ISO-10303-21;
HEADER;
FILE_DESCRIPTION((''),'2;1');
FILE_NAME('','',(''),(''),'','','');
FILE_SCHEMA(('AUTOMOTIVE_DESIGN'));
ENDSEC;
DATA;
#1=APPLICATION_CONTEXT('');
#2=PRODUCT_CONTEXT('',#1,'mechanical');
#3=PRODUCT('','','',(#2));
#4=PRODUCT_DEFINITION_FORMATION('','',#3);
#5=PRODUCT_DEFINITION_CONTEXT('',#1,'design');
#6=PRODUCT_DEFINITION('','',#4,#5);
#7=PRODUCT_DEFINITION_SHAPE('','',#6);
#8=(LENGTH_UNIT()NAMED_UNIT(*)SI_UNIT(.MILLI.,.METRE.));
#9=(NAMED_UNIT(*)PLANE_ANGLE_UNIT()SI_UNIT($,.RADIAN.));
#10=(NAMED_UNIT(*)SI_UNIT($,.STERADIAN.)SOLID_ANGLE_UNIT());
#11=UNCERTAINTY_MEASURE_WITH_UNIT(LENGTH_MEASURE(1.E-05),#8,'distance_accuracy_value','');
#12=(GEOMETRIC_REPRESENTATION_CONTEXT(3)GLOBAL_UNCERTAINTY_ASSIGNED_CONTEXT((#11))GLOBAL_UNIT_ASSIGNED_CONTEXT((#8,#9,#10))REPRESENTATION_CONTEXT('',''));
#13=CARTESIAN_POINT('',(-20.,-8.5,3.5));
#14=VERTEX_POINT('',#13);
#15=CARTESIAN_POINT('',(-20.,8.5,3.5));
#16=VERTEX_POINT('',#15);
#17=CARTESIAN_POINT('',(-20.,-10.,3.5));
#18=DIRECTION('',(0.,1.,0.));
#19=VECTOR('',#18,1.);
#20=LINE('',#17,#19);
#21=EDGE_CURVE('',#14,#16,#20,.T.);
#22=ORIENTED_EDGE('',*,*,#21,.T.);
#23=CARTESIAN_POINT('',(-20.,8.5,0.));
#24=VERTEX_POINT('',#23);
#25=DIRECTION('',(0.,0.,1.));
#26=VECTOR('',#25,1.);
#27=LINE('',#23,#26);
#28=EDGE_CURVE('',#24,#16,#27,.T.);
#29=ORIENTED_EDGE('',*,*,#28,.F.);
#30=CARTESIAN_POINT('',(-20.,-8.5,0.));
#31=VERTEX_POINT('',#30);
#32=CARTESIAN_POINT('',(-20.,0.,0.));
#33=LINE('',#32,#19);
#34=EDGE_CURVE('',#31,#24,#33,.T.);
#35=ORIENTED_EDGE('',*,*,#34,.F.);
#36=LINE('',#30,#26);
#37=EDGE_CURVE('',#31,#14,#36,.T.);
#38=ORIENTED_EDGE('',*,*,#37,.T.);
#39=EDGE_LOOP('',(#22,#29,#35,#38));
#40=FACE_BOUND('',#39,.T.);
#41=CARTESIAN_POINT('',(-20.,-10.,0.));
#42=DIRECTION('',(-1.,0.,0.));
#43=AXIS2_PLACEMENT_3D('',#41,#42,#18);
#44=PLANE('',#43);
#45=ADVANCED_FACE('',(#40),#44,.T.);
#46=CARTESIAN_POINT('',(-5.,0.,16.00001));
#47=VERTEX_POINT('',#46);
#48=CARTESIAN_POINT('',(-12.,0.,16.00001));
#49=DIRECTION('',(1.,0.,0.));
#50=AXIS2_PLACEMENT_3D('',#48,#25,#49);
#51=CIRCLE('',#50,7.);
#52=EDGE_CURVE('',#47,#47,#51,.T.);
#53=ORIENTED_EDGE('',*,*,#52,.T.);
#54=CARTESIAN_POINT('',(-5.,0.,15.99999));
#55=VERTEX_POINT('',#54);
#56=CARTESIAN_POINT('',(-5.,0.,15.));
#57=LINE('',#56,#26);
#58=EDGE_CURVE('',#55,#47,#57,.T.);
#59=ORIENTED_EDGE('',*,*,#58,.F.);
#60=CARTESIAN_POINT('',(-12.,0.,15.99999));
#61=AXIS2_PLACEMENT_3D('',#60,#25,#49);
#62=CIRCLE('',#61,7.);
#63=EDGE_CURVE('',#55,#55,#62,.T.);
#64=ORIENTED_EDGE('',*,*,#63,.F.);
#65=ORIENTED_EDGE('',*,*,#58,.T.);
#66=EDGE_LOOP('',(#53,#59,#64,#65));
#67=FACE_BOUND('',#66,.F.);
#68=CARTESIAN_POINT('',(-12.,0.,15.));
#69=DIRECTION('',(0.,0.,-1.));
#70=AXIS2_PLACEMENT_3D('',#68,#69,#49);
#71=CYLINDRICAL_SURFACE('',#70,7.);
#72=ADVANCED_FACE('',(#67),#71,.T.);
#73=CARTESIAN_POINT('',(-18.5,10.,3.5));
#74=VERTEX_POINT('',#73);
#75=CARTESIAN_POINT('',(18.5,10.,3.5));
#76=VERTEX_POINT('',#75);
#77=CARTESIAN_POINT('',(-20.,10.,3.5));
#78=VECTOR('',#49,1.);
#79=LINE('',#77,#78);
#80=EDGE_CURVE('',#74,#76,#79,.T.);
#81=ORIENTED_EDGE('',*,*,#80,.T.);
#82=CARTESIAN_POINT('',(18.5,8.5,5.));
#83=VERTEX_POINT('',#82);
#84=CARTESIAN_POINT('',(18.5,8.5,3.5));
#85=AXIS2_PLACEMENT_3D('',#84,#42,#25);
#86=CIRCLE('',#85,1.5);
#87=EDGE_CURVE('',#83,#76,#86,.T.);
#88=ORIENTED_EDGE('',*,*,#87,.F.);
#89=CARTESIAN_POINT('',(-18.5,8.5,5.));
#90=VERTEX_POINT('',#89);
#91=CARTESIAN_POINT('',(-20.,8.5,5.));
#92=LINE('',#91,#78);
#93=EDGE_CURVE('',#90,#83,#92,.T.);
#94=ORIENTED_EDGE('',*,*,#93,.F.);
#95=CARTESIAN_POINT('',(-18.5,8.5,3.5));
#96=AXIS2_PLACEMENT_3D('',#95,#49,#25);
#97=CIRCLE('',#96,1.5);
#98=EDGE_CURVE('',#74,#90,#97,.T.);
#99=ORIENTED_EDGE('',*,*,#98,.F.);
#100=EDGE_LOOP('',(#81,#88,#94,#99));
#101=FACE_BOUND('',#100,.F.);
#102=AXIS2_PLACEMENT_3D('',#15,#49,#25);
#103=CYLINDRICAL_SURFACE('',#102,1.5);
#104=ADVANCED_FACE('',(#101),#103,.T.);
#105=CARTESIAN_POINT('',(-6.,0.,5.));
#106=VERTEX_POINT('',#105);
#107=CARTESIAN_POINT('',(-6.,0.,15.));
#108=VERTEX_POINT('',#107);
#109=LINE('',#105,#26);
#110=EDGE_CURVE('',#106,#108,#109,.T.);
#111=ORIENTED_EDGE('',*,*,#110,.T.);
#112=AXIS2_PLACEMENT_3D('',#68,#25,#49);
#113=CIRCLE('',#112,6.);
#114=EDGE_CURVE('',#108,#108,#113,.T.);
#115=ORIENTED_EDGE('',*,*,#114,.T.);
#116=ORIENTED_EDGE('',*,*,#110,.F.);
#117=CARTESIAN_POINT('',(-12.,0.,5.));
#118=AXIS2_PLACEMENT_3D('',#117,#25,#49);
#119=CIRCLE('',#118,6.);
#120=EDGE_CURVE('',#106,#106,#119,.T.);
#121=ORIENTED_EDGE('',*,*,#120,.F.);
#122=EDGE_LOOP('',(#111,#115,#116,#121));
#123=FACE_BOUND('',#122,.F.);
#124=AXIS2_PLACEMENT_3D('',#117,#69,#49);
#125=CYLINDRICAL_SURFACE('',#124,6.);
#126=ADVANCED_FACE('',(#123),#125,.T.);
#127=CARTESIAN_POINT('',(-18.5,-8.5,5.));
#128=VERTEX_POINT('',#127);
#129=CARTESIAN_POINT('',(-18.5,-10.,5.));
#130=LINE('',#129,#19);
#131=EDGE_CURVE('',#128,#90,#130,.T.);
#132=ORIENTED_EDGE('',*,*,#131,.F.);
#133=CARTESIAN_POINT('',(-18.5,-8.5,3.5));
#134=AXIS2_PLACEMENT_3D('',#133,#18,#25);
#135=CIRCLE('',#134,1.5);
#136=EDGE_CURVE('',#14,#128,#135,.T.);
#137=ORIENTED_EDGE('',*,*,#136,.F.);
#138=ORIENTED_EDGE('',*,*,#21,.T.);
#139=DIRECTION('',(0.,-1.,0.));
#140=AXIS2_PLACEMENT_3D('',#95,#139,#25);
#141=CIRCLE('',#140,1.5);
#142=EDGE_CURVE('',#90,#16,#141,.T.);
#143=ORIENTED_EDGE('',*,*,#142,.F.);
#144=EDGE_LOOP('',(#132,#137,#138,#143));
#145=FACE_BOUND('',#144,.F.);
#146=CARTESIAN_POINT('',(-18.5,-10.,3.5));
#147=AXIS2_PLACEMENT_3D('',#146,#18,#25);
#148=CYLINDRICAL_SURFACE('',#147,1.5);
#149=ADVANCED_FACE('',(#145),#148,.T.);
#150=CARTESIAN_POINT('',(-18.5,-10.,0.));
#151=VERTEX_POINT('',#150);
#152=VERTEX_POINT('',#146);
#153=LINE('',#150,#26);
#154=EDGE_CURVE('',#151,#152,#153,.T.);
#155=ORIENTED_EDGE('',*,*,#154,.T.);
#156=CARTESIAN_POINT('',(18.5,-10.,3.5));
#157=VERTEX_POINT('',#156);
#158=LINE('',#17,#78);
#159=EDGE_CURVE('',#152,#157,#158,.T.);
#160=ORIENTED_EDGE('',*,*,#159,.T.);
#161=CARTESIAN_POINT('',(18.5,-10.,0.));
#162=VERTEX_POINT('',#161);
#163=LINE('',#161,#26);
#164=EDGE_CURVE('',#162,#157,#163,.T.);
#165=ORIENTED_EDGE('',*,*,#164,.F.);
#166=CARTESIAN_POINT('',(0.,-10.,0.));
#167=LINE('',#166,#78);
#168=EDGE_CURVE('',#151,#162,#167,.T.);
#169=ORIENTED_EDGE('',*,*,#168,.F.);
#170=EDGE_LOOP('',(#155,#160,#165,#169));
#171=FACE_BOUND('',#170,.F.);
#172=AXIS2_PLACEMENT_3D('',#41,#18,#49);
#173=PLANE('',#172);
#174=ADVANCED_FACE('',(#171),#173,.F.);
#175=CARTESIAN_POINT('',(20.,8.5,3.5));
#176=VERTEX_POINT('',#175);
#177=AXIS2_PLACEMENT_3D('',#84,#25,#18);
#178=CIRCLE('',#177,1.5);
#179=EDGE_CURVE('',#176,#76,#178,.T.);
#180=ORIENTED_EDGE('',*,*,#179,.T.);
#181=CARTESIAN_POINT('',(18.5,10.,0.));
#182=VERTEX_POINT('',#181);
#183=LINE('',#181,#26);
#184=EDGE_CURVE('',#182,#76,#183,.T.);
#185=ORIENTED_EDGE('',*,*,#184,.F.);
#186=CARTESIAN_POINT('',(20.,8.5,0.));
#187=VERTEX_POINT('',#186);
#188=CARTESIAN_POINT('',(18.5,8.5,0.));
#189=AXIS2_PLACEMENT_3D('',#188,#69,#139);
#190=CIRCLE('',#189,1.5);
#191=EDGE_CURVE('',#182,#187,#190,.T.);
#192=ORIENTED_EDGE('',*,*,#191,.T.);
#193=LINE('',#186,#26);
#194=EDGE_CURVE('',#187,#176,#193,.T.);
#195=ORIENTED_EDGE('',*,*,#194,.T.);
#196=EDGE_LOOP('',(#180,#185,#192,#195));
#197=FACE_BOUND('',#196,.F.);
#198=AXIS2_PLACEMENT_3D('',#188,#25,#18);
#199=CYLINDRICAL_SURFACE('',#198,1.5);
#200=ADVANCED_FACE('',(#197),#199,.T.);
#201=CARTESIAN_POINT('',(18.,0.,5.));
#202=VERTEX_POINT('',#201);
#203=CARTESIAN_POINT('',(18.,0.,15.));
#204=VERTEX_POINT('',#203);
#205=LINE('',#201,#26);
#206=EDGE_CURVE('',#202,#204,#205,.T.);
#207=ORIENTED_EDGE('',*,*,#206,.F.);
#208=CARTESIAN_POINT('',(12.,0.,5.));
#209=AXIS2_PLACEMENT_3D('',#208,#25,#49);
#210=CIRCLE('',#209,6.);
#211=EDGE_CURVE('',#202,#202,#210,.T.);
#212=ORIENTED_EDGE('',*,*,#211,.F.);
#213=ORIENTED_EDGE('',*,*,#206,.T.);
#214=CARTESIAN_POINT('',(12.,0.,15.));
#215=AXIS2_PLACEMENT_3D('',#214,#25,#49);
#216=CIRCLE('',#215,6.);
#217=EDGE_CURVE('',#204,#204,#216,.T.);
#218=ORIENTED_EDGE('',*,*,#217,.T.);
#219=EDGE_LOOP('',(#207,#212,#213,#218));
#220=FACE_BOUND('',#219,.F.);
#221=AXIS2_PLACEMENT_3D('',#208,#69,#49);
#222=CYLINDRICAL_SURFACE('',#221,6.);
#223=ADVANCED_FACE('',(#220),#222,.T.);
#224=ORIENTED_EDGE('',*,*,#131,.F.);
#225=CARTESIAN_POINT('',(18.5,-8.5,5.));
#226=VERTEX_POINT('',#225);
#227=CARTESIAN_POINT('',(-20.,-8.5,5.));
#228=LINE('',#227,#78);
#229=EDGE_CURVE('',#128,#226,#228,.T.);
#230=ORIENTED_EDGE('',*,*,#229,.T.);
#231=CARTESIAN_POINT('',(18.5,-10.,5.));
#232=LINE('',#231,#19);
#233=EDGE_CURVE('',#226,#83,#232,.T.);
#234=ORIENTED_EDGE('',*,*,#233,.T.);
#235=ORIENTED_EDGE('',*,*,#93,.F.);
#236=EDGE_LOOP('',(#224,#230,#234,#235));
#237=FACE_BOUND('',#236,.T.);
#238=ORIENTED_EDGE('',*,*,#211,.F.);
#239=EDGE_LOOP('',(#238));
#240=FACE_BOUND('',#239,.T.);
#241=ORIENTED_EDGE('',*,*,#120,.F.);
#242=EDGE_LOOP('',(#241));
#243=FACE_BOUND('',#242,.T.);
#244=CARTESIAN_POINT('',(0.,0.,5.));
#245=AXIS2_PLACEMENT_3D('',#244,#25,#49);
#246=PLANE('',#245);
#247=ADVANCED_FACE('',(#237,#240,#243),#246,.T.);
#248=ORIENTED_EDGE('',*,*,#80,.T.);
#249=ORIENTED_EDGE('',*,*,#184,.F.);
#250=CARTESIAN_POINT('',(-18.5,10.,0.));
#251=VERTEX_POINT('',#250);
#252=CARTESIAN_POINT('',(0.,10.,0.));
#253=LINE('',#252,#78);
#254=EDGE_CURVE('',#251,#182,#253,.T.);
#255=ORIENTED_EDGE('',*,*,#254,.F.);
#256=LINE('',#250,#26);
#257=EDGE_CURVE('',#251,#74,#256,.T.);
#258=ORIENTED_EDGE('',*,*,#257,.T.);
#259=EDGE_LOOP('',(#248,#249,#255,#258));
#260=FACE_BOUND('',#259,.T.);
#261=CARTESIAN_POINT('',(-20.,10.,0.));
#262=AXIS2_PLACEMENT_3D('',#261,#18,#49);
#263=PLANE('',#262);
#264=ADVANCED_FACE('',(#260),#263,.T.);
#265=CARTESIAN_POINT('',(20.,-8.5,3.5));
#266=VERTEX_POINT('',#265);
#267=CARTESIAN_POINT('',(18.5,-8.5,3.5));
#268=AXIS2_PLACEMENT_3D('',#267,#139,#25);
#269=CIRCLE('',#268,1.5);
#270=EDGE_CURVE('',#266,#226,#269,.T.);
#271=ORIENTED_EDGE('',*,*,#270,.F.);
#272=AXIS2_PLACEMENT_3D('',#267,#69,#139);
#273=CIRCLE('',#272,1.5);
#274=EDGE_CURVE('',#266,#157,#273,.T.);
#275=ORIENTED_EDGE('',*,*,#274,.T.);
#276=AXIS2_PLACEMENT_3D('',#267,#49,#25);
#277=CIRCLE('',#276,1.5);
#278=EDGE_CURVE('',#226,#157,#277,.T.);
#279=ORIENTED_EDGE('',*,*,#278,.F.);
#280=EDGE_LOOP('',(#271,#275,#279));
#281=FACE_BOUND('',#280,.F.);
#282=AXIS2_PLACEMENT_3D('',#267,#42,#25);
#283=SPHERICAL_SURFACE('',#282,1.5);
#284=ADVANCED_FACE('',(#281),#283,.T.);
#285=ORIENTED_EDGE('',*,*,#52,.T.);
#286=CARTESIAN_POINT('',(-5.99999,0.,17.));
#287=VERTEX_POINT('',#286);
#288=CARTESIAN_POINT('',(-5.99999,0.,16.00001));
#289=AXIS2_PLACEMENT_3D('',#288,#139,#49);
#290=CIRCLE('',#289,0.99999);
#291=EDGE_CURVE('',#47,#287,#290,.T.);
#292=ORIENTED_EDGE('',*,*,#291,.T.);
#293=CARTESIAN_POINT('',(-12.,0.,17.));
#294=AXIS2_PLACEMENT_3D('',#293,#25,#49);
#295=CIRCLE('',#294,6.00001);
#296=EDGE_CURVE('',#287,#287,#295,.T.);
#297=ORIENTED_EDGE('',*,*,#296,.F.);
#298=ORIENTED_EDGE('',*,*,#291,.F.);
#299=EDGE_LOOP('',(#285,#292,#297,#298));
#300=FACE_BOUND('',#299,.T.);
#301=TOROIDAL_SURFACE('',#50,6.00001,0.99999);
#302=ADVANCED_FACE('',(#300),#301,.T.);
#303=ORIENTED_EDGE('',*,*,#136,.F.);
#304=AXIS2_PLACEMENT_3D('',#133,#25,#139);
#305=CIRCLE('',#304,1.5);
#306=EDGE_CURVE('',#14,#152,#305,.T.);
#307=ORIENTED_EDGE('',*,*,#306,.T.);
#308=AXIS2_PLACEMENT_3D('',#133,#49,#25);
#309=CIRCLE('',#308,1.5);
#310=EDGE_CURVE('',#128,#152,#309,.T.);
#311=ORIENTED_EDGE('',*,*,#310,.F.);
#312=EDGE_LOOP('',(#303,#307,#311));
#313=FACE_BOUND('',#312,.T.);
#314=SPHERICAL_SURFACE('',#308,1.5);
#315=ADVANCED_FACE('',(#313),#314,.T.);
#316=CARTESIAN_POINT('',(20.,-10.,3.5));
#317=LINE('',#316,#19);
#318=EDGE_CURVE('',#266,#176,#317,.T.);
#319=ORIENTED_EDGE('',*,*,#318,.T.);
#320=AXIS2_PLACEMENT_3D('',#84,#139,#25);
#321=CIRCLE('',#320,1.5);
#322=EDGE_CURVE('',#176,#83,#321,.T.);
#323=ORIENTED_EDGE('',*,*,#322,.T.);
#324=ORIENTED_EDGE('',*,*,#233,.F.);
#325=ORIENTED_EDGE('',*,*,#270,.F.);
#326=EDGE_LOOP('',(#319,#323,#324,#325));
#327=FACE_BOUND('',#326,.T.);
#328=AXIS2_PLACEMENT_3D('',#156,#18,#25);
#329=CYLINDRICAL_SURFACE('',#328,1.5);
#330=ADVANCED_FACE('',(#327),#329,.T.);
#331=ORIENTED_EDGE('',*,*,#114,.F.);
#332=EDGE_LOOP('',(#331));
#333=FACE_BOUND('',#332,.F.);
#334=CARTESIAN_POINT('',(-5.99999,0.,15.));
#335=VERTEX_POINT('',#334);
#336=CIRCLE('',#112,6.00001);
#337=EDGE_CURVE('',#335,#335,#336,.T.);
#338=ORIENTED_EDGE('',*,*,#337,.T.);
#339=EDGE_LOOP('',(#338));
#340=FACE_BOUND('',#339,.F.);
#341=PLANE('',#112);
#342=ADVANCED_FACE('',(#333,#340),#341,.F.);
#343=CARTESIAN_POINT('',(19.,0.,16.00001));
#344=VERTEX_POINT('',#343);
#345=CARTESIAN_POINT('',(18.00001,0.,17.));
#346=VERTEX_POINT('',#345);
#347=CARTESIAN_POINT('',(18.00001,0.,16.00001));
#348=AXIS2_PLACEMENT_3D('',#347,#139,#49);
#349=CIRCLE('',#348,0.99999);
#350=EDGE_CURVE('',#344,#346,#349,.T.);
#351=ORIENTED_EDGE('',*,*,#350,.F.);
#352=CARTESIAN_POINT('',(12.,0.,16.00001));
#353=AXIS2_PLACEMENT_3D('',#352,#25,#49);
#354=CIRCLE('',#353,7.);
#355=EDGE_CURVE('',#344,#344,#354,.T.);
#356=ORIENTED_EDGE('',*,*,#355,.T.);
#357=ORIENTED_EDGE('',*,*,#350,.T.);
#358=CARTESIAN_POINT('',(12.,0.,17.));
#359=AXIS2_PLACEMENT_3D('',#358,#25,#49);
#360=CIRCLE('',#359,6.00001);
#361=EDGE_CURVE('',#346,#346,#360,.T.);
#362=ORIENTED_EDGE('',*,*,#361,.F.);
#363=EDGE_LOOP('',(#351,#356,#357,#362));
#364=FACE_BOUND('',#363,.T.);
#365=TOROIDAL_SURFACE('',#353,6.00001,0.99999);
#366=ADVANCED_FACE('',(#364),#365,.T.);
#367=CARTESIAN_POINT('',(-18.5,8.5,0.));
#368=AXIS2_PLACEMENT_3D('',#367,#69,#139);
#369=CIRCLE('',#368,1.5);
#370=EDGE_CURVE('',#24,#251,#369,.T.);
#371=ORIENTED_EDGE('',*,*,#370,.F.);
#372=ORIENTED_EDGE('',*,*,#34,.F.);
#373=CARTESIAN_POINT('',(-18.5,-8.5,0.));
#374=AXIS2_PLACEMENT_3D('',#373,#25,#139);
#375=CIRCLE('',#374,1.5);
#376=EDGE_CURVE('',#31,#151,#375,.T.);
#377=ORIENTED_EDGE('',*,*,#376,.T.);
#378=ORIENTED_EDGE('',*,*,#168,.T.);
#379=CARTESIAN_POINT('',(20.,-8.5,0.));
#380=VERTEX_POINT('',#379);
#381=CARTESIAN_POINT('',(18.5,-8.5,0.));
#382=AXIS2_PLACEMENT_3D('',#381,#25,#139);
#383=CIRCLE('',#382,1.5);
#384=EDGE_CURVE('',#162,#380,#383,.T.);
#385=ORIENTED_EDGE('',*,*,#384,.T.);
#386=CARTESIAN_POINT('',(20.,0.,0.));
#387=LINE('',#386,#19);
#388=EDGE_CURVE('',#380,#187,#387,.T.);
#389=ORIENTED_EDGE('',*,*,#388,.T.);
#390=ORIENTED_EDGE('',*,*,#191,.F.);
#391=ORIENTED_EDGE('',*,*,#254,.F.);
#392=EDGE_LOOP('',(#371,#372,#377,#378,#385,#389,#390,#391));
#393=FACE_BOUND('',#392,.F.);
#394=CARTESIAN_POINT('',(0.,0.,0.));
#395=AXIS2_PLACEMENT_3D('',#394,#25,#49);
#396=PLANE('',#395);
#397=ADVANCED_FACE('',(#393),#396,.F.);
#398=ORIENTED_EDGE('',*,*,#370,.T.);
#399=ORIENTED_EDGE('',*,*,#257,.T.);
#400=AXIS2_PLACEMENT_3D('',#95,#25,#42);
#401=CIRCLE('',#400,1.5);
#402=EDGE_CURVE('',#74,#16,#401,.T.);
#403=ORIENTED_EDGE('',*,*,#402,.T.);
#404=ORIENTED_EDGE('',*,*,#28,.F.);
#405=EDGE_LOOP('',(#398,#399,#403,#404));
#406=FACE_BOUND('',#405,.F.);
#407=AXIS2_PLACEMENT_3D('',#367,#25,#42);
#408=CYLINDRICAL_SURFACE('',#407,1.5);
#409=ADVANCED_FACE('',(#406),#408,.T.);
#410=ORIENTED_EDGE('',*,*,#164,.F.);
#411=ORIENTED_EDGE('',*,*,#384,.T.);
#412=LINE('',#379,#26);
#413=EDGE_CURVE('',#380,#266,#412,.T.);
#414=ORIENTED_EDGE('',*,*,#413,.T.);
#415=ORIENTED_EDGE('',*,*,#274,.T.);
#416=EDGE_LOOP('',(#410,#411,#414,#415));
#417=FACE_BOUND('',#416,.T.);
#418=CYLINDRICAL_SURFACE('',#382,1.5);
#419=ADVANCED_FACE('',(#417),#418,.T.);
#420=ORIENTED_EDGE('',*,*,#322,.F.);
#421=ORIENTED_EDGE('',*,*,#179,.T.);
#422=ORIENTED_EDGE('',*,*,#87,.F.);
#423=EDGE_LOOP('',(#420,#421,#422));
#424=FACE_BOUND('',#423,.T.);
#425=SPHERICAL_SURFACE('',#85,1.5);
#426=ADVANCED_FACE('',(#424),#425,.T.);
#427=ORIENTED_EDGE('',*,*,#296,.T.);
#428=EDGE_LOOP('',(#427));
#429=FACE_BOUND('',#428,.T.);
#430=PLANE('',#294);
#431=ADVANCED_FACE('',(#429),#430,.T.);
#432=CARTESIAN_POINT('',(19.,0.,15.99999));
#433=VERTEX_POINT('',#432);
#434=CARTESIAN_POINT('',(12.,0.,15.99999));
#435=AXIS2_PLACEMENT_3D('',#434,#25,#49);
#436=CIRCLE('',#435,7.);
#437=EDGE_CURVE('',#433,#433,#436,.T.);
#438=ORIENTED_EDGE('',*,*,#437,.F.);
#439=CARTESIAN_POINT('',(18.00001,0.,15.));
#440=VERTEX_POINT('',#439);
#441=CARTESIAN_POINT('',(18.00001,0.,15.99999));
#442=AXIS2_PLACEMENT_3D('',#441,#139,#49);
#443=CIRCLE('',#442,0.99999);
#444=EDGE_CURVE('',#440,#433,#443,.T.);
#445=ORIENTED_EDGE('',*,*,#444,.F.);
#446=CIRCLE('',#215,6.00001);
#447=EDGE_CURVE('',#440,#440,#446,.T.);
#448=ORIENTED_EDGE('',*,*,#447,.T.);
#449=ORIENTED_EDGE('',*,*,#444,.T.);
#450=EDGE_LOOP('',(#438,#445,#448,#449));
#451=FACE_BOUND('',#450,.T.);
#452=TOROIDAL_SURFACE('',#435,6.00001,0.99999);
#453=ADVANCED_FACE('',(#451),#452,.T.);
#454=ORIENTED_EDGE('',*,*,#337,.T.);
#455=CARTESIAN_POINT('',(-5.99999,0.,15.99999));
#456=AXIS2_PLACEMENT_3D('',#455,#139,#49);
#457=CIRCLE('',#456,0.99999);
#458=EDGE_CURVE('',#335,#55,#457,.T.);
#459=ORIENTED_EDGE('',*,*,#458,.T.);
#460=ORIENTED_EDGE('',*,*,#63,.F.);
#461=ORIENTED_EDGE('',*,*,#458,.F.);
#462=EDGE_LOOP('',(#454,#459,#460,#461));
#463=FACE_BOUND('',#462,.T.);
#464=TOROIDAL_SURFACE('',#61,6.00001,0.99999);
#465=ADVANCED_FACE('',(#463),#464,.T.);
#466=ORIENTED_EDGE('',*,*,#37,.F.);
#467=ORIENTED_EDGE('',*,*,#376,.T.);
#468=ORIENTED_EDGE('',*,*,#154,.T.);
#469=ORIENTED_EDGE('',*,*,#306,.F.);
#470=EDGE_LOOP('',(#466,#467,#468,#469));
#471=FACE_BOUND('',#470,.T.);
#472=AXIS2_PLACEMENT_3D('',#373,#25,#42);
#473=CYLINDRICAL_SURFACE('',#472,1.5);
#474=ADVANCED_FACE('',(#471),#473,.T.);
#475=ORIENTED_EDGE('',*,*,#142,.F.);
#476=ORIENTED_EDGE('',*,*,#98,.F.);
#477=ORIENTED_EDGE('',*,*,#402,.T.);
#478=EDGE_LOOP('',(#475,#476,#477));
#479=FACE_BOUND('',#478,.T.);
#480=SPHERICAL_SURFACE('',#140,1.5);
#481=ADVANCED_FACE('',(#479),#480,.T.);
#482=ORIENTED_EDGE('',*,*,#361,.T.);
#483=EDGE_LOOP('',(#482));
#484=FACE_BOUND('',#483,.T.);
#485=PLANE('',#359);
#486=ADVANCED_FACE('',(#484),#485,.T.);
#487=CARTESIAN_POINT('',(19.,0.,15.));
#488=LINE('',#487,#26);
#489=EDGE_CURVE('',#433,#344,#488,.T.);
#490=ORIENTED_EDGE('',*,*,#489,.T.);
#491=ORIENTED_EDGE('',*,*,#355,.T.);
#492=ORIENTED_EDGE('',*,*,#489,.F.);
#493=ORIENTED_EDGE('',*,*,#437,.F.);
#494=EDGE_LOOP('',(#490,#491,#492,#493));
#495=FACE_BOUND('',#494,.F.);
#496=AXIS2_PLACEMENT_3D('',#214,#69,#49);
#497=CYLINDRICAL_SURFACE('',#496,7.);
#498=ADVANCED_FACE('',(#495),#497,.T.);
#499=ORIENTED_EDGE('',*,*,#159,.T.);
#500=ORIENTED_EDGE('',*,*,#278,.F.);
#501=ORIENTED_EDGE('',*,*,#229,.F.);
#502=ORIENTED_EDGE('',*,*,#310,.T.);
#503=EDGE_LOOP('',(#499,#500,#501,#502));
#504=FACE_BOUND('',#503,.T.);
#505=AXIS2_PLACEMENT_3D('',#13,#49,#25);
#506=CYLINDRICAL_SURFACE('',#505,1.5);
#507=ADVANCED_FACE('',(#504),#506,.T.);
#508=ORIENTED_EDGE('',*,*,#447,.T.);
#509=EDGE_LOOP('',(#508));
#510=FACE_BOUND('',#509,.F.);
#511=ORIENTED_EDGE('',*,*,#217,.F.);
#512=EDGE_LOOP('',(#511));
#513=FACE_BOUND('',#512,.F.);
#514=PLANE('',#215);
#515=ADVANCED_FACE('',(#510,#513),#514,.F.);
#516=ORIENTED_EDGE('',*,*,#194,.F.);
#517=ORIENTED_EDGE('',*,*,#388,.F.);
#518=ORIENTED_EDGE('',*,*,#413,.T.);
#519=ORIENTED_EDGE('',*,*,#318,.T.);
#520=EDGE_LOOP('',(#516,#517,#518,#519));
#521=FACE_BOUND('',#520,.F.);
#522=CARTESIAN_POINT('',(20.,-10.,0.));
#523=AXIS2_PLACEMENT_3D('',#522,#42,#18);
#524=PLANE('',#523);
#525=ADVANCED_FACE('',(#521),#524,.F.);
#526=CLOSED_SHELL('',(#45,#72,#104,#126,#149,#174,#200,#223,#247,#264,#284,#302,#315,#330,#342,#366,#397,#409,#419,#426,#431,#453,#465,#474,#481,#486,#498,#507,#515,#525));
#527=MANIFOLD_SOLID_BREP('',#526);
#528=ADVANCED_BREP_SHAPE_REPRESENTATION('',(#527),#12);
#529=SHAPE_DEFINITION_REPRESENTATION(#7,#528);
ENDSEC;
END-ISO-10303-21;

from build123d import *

# Parameters (mm, degrees)
F0_W     = 40
F0_H     = 20
F1_DEPTH = 5
F2_R     = 6
F3_DEPTH = 10
F4_R     = 7
F5_DEPTH = 2
F6_R     = 7
F7_DEPTH = 2
F8_R     = 1.5
F9_R     = 0.99999


# Not quite as in the source:
# - a fillet or chamfer is up to 0.001 mm smaller than in the source, because OpenCascade refuses the exact size


with BuildPart() as f1:
    # F0 (on Top) → F1 (new body)
    with BuildSketch(Plane.XY):
        Rectangle(F0_W, F0_H)
    extrude(amount=F1_DEPTH)

    # F2 (on face) → F3 (join)
    with BuildSketch(Plane.XY.offset(5)):
        with Locations((-12, 0)):
            Circle(F2_R)
        with Locations((12, 0)):
            Circle(F2_R)
    extrude(amount=F3_DEPTH)

    # F4 (on face) → F5 (join)
    with BuildSketch(Plane.XY.offset(15)):
        with Locations((-12, 0)):
            Circle(F4_R)
    extrude(amount=F5_DEPTH)

    # F6 (on face) → F7 (join)
    with BuildSketch(Plane.XY.offset(15)):
        with Locations((12, 0)):
            Circle(F6_R)
    extrude(amount=F7_DEPTH)

    # F8
    f8_edges = [f1.edges().sort_by_distance(p)[0] for p in [
        (0, -10, 5),
        (-20, 0, 5),
        (0, 10, 5),
        (20, 0, 5),
        (20, -10, 2.5),
        (20, 10, 2.5),
        (-20, 10, 2.5),
        (-20, -10, 2.5),
    ]]
    fillet(f8_edges, radius=F8_R)

    # F9 (radius 1 in the source; OpenCascade refuses exactly that, so slightly less here)
    f9_edges = [f1.edges().sort_by_distance(p)[0] for p in [
        (-19, 0, 15),
        (5, 0, 15),
        (-19, 0, 17),
        (5, 0, 17),
    ]]
    fillet(f9_edges, radius=F9_R)


solid = f1.part
